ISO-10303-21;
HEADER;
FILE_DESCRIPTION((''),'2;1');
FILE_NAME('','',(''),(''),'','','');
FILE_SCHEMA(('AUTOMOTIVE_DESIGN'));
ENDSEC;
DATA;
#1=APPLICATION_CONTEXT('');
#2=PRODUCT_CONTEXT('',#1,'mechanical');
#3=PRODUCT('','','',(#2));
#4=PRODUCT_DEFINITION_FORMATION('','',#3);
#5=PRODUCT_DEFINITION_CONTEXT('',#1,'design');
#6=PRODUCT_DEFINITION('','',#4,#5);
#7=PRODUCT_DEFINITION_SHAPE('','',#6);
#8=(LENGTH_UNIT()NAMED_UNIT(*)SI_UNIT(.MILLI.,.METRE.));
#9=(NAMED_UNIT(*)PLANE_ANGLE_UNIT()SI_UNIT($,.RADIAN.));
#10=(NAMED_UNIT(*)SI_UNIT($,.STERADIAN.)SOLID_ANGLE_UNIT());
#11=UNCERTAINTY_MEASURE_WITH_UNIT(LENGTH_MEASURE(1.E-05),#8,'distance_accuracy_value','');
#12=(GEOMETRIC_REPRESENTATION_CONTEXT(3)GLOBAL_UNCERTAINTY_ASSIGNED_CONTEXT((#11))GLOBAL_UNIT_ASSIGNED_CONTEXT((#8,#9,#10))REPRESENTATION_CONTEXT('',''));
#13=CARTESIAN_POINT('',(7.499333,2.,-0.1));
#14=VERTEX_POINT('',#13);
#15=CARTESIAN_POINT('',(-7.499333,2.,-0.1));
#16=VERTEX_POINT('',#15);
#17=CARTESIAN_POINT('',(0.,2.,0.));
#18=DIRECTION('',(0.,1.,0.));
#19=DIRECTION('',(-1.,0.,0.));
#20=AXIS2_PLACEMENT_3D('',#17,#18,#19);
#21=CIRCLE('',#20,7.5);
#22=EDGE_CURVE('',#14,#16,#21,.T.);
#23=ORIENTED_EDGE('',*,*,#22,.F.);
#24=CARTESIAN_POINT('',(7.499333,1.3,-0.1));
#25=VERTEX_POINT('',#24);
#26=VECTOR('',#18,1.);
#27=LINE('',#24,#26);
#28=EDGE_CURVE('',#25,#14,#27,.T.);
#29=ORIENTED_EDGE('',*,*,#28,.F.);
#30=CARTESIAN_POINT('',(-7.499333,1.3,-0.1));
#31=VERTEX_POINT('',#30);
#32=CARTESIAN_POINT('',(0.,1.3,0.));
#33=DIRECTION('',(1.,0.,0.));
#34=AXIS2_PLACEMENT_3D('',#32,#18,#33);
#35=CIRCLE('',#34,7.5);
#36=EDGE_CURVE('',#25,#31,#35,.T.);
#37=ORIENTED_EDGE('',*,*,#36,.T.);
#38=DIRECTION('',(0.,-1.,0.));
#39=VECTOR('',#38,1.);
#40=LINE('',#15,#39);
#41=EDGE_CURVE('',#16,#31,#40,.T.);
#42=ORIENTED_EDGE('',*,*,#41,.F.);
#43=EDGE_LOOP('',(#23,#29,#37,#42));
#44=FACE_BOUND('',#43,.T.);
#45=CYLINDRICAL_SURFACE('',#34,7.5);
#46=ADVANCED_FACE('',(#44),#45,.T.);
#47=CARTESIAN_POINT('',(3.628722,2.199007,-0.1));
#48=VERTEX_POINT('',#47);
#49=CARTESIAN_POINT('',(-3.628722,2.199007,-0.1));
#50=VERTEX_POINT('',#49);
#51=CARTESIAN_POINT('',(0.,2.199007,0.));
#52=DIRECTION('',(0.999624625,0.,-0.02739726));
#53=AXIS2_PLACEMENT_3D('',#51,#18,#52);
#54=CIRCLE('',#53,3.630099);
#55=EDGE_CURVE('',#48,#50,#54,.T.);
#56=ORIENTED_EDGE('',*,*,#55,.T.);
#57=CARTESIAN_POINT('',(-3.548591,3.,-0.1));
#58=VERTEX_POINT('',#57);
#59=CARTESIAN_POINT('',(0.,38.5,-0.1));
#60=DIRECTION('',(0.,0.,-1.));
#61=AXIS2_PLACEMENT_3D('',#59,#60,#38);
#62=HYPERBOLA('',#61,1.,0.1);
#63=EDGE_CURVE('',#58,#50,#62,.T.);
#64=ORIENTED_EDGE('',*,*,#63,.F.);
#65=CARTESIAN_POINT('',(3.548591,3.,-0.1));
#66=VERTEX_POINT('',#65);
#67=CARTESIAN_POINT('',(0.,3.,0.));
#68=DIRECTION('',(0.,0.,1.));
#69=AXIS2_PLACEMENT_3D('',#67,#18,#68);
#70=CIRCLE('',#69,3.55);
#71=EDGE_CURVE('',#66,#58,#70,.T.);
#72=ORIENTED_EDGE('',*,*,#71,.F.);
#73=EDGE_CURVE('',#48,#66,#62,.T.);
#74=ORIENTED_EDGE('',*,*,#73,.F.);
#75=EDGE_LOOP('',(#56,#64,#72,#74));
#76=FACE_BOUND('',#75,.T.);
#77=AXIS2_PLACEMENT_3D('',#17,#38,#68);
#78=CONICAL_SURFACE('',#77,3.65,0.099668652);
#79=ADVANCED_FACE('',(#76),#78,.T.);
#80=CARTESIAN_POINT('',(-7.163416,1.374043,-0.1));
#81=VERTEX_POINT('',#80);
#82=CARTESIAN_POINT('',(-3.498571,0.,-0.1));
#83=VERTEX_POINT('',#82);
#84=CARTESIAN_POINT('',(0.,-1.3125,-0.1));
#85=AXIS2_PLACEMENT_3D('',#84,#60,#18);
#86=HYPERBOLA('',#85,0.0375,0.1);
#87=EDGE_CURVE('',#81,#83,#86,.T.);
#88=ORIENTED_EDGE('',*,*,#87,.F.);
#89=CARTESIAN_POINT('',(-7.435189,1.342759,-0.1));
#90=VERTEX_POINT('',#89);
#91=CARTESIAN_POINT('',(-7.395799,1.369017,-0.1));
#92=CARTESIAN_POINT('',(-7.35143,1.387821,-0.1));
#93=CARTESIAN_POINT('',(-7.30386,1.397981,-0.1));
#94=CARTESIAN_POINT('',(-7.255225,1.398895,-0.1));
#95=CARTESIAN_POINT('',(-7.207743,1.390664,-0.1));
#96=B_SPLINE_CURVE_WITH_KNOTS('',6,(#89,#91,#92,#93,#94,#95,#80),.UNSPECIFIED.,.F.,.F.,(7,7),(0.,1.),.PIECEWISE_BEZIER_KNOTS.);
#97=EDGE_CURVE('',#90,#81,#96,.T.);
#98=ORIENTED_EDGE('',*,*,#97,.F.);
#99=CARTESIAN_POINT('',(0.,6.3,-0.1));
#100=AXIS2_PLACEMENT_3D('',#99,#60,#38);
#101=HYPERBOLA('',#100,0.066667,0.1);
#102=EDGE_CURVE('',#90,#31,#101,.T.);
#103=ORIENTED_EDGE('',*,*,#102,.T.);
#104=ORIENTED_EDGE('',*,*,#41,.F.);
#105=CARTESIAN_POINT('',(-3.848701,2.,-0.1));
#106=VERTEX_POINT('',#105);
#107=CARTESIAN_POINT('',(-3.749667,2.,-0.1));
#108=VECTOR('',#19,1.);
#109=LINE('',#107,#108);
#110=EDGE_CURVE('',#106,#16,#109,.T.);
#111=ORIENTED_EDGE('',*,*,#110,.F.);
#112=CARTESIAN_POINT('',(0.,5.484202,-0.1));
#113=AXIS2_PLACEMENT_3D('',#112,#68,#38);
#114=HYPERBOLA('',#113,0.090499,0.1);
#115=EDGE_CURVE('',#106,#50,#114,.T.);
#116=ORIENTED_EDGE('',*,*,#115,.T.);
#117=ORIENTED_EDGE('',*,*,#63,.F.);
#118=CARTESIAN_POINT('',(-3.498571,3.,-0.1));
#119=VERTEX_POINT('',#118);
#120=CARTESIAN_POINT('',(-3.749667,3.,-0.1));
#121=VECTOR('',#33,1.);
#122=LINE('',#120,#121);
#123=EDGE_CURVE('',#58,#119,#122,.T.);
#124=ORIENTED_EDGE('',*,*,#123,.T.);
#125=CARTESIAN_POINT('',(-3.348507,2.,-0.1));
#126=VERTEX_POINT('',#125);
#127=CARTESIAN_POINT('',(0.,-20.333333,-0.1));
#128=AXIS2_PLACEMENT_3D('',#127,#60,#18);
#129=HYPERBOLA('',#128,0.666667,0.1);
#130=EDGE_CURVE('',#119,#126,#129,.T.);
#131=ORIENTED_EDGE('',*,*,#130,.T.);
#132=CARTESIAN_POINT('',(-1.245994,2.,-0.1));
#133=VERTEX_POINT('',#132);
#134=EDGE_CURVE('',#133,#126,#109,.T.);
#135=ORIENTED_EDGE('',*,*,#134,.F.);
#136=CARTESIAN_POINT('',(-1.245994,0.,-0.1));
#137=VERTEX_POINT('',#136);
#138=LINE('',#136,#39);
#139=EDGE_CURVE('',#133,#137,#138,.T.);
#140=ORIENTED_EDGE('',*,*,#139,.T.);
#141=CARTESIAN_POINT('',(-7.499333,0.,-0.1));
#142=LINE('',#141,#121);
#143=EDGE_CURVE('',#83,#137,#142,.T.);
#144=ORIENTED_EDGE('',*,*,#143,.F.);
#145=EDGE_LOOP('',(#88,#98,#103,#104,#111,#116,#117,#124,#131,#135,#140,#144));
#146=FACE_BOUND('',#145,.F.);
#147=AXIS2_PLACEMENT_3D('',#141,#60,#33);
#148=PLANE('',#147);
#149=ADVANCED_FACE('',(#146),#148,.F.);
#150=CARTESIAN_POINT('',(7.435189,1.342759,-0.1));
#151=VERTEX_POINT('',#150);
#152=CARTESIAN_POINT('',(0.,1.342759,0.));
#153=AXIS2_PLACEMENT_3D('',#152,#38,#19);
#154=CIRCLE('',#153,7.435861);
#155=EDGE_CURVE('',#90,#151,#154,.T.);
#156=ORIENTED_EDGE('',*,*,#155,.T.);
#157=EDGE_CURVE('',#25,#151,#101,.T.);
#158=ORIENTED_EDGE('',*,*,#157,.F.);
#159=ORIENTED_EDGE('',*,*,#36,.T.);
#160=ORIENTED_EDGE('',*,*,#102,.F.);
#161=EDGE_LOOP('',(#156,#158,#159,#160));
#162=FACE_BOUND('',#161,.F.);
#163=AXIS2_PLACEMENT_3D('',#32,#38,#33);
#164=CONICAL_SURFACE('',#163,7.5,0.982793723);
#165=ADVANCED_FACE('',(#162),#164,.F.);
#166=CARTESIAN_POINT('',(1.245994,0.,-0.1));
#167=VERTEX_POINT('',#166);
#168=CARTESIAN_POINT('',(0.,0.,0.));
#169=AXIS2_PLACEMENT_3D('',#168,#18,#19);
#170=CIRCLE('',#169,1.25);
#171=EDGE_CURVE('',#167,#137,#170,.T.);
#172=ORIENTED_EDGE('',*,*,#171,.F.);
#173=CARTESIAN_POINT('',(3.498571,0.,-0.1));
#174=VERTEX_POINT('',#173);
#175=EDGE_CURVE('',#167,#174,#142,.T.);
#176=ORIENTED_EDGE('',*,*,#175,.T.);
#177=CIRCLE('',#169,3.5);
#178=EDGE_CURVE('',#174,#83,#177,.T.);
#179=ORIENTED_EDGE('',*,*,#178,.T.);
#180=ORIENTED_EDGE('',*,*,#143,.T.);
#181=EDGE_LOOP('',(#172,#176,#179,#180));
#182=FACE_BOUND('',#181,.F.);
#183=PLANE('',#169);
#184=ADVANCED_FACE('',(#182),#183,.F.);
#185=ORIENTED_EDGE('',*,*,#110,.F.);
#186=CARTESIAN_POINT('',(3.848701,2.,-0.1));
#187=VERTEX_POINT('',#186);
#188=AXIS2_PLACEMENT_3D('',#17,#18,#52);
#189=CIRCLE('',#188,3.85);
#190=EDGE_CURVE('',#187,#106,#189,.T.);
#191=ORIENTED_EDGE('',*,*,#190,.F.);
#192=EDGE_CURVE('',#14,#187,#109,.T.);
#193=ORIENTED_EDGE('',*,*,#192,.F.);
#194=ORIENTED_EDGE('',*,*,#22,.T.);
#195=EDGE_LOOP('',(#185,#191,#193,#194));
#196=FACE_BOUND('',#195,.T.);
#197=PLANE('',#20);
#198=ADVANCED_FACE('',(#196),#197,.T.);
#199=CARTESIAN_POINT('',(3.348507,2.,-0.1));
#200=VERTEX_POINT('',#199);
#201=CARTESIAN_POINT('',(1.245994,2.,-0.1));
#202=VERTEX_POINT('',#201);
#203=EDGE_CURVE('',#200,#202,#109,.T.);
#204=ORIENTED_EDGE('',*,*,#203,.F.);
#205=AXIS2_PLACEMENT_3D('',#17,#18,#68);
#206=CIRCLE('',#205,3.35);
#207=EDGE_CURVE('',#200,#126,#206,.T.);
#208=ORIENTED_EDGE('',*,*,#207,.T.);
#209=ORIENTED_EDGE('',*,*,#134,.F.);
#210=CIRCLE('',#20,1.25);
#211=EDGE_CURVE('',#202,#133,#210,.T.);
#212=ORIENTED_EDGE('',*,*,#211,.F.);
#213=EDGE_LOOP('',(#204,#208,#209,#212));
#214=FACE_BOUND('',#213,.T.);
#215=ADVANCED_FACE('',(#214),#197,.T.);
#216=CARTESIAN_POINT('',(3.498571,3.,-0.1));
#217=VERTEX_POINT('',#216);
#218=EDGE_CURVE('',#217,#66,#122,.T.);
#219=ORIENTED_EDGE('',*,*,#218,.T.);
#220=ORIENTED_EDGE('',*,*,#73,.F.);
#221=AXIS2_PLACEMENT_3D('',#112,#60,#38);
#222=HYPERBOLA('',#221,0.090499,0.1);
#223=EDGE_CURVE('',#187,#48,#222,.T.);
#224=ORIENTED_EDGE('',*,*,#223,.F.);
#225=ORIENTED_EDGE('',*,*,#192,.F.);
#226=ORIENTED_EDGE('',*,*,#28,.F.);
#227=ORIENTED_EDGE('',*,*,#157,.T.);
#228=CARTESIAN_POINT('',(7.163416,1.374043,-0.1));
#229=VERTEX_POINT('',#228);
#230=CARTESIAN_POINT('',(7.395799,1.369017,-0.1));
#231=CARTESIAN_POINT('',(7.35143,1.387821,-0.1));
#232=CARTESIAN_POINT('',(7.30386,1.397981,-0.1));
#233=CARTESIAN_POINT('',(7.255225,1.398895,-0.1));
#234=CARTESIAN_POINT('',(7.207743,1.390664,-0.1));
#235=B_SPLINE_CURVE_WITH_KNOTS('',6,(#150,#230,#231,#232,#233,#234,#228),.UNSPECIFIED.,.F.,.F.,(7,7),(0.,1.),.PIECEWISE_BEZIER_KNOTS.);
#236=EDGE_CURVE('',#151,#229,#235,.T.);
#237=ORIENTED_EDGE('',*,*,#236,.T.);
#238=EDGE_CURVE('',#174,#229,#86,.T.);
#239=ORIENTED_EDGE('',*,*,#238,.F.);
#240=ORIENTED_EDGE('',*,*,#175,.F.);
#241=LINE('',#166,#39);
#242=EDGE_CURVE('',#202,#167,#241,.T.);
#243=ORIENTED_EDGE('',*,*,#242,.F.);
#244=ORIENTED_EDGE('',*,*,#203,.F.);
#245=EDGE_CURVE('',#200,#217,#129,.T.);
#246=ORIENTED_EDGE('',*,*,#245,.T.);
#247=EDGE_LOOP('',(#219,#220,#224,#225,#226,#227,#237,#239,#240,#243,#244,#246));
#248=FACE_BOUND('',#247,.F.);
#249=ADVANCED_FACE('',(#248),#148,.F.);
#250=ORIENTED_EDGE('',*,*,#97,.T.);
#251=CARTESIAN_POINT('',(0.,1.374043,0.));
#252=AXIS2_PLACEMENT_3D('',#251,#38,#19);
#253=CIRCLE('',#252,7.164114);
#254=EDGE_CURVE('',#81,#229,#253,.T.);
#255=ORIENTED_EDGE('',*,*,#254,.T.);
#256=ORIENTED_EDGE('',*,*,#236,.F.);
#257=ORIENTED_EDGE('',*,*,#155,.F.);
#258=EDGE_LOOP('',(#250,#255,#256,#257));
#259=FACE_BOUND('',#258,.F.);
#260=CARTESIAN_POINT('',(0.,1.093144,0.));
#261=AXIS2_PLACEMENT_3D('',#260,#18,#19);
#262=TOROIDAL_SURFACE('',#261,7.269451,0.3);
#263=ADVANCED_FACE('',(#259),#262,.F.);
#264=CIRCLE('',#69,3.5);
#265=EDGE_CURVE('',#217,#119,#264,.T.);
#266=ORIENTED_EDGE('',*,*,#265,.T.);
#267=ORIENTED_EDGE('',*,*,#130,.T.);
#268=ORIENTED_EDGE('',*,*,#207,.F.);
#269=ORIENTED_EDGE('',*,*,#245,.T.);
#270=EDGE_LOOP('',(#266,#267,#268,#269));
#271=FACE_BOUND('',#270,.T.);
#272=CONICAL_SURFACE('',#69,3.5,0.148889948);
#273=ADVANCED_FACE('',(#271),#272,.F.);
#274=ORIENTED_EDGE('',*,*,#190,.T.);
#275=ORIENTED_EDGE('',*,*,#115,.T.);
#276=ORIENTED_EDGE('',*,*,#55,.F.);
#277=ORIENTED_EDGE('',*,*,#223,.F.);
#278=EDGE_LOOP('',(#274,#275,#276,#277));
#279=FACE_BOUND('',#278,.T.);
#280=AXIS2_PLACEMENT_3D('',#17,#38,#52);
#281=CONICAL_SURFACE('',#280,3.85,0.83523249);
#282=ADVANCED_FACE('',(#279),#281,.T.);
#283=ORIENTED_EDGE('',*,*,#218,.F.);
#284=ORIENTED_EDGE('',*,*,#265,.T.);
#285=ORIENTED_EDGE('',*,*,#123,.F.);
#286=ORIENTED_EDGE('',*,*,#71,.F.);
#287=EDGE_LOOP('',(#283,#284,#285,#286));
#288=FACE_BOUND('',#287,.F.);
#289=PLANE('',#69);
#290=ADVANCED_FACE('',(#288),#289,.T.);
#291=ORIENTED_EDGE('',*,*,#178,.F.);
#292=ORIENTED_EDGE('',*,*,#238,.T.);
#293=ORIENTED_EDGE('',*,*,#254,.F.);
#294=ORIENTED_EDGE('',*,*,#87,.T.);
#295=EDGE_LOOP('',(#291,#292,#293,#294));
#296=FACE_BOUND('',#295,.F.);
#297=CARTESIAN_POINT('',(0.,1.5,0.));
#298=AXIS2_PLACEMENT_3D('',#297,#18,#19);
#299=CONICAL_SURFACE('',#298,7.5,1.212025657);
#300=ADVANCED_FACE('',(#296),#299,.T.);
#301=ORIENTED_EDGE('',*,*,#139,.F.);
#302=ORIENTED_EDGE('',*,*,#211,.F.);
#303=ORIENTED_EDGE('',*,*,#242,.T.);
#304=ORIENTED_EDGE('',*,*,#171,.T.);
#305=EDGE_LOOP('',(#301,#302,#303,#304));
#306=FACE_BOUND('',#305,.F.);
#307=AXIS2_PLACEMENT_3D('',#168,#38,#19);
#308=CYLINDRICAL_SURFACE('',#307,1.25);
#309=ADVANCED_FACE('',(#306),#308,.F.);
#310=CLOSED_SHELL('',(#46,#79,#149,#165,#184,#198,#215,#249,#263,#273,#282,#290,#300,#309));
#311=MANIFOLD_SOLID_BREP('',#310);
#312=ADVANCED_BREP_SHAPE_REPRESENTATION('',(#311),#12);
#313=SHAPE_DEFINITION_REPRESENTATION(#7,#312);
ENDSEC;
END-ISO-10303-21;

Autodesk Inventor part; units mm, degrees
ref_plane "YZ Plane" through (0, 0, 0) normal (1, 0, 0) x (0, 1, 0)
ref_plane "XZ Plane" through (0, 0, 0) normal (0, 1, 0) x (-1, 0, 0)
ref_plane "XY Plane" through (0, 0, 0) normal (0, 0, 1) x (1, 0, 0)
sketch "Sketch1" plane through (0, 0, 0) normal (0, 1, 0) x (-1, 0, 0)
  circle A0 centre (0, 0) radius 1.25
  circle A1 centre (0, 0) radius 7.5
  dimension "d0" = 2.5
  dimension "d1" = 15
extrude "Body" add sketch "Sketch1" along normal blind 2
chamfer "Bottom Chamfer" distance 1.5 distance2 4 1 edges at (7.5, 0, 0) measured on face at (-7.4757, 1.3333, -0.6035)
sketch "Sketch4" plane through (0, 0, 0) normal (1, 0, 0) x (0, 1, 0)
  line L0 (2, -7.5) -> (2, 7.5)
  line L1 (2, 3.35) -> (3, 3.35)
  line L2 (3, 3.35) -> (3, 3.65)
  line L3 (3, 3.65) -> (2, 3.65)
  line L4 (2, 3.65) -> (2, 3.35)
  line L5 (2, 3.65) -> (3, 3.55)
  line L6 (2, 3.65) -> (2.311367, 3.65) construction
  line L7 (3, 3.5) -> (2, 3.35)
  line L8 (-0.462273, 0) -> (2.77364, 0)
  point P0 (0, 0)
  point P1 (2, 0)
  point P2 (2, 3.65)
  dimension "d16" = 1
  dimension "d17" = 0.3
  dimension "d18" = 3.65
  dimension "d34" = 0.1
revolve "Centering Lip" add sketch "Sketch4" angle 360 about axis through (0, -10, 0) along (0, 1, 0) contours L0 L5 L2 L7
sketch "Sketch6" plane through (0, 0, 0) normal (0, 0, 1) x (1, 0, 0)
  line L0 (7.5, 2) -> (-7.5, 2) projected
  line L1 (7.5, 2) -> (7.2, 2)
  line L2 (7.2, 2) -> (7.2, 1.3)
  line L3 (7.2, 1.3) -> (7.5, 1.3)
  line L4 (7.5, 1.3) -> (7.5, 2)
  line L5 (-7.5, 1.5) -> (7.5, 1.5) projected
  line L6 (7.5, 1.3) -> (7.2, 1.5)
  line L7 (0, -0.4) -> (0, 2.4) projected
  point P0 (0, 0)
  dimension "d27" = 0.3
  dimension "d28" = 0.7
revolve "Revolution2" add sketch "Sketch6" angle 360 about axis through (0, -10, 0) along (0, 1, 0) contours L4 L6 L5
fillet "Fillet1" radius 0.3 2 edges at (0, 1.428, 7.308) (0, 1.428, -7.308)
sketch "Sketch7" plane through (0, 0, 0) normal (0, -1, 0) x (1, 0, 0)
  line L0 (-7.5, -0.1) -> (7.5, -0.1)
  line L1 (7.5, -0.1) -> (7.5, 7.5)
  line L2 (7.5, 7.5) -> (-7.5, 7.5)
  line L3 (-7.5, 7.5) -> (-7.5, -0.1)
  circle A0 centre (0, 0) radius 7.5 projected
  point P0 (-7.499333, -0.1)
  point P1 (7.499333, -0.1)
  dimension "d31" = 0.1
sketch "Sketch7 outline for Extrusion5" plane through (0, 0, 0) normal (0, -1, 0) x (1, 0, 0)
  arc A0 (7.499333, -0.1) -> (-7.499333, -0.1) centre (0, 0) ccw
  line L0 (-7.499333, -0.1) -> (7.499333, -0.1)
extrude "Extrusion5" cut sketch "Sketch7 outline for Extrusion5" against normal through all
chamfer "Chamfer3" distance 0.2 angle 45 1 edges at (0, 2, -3.65)
properties part number "Wire Passthrough Resin Seal"
